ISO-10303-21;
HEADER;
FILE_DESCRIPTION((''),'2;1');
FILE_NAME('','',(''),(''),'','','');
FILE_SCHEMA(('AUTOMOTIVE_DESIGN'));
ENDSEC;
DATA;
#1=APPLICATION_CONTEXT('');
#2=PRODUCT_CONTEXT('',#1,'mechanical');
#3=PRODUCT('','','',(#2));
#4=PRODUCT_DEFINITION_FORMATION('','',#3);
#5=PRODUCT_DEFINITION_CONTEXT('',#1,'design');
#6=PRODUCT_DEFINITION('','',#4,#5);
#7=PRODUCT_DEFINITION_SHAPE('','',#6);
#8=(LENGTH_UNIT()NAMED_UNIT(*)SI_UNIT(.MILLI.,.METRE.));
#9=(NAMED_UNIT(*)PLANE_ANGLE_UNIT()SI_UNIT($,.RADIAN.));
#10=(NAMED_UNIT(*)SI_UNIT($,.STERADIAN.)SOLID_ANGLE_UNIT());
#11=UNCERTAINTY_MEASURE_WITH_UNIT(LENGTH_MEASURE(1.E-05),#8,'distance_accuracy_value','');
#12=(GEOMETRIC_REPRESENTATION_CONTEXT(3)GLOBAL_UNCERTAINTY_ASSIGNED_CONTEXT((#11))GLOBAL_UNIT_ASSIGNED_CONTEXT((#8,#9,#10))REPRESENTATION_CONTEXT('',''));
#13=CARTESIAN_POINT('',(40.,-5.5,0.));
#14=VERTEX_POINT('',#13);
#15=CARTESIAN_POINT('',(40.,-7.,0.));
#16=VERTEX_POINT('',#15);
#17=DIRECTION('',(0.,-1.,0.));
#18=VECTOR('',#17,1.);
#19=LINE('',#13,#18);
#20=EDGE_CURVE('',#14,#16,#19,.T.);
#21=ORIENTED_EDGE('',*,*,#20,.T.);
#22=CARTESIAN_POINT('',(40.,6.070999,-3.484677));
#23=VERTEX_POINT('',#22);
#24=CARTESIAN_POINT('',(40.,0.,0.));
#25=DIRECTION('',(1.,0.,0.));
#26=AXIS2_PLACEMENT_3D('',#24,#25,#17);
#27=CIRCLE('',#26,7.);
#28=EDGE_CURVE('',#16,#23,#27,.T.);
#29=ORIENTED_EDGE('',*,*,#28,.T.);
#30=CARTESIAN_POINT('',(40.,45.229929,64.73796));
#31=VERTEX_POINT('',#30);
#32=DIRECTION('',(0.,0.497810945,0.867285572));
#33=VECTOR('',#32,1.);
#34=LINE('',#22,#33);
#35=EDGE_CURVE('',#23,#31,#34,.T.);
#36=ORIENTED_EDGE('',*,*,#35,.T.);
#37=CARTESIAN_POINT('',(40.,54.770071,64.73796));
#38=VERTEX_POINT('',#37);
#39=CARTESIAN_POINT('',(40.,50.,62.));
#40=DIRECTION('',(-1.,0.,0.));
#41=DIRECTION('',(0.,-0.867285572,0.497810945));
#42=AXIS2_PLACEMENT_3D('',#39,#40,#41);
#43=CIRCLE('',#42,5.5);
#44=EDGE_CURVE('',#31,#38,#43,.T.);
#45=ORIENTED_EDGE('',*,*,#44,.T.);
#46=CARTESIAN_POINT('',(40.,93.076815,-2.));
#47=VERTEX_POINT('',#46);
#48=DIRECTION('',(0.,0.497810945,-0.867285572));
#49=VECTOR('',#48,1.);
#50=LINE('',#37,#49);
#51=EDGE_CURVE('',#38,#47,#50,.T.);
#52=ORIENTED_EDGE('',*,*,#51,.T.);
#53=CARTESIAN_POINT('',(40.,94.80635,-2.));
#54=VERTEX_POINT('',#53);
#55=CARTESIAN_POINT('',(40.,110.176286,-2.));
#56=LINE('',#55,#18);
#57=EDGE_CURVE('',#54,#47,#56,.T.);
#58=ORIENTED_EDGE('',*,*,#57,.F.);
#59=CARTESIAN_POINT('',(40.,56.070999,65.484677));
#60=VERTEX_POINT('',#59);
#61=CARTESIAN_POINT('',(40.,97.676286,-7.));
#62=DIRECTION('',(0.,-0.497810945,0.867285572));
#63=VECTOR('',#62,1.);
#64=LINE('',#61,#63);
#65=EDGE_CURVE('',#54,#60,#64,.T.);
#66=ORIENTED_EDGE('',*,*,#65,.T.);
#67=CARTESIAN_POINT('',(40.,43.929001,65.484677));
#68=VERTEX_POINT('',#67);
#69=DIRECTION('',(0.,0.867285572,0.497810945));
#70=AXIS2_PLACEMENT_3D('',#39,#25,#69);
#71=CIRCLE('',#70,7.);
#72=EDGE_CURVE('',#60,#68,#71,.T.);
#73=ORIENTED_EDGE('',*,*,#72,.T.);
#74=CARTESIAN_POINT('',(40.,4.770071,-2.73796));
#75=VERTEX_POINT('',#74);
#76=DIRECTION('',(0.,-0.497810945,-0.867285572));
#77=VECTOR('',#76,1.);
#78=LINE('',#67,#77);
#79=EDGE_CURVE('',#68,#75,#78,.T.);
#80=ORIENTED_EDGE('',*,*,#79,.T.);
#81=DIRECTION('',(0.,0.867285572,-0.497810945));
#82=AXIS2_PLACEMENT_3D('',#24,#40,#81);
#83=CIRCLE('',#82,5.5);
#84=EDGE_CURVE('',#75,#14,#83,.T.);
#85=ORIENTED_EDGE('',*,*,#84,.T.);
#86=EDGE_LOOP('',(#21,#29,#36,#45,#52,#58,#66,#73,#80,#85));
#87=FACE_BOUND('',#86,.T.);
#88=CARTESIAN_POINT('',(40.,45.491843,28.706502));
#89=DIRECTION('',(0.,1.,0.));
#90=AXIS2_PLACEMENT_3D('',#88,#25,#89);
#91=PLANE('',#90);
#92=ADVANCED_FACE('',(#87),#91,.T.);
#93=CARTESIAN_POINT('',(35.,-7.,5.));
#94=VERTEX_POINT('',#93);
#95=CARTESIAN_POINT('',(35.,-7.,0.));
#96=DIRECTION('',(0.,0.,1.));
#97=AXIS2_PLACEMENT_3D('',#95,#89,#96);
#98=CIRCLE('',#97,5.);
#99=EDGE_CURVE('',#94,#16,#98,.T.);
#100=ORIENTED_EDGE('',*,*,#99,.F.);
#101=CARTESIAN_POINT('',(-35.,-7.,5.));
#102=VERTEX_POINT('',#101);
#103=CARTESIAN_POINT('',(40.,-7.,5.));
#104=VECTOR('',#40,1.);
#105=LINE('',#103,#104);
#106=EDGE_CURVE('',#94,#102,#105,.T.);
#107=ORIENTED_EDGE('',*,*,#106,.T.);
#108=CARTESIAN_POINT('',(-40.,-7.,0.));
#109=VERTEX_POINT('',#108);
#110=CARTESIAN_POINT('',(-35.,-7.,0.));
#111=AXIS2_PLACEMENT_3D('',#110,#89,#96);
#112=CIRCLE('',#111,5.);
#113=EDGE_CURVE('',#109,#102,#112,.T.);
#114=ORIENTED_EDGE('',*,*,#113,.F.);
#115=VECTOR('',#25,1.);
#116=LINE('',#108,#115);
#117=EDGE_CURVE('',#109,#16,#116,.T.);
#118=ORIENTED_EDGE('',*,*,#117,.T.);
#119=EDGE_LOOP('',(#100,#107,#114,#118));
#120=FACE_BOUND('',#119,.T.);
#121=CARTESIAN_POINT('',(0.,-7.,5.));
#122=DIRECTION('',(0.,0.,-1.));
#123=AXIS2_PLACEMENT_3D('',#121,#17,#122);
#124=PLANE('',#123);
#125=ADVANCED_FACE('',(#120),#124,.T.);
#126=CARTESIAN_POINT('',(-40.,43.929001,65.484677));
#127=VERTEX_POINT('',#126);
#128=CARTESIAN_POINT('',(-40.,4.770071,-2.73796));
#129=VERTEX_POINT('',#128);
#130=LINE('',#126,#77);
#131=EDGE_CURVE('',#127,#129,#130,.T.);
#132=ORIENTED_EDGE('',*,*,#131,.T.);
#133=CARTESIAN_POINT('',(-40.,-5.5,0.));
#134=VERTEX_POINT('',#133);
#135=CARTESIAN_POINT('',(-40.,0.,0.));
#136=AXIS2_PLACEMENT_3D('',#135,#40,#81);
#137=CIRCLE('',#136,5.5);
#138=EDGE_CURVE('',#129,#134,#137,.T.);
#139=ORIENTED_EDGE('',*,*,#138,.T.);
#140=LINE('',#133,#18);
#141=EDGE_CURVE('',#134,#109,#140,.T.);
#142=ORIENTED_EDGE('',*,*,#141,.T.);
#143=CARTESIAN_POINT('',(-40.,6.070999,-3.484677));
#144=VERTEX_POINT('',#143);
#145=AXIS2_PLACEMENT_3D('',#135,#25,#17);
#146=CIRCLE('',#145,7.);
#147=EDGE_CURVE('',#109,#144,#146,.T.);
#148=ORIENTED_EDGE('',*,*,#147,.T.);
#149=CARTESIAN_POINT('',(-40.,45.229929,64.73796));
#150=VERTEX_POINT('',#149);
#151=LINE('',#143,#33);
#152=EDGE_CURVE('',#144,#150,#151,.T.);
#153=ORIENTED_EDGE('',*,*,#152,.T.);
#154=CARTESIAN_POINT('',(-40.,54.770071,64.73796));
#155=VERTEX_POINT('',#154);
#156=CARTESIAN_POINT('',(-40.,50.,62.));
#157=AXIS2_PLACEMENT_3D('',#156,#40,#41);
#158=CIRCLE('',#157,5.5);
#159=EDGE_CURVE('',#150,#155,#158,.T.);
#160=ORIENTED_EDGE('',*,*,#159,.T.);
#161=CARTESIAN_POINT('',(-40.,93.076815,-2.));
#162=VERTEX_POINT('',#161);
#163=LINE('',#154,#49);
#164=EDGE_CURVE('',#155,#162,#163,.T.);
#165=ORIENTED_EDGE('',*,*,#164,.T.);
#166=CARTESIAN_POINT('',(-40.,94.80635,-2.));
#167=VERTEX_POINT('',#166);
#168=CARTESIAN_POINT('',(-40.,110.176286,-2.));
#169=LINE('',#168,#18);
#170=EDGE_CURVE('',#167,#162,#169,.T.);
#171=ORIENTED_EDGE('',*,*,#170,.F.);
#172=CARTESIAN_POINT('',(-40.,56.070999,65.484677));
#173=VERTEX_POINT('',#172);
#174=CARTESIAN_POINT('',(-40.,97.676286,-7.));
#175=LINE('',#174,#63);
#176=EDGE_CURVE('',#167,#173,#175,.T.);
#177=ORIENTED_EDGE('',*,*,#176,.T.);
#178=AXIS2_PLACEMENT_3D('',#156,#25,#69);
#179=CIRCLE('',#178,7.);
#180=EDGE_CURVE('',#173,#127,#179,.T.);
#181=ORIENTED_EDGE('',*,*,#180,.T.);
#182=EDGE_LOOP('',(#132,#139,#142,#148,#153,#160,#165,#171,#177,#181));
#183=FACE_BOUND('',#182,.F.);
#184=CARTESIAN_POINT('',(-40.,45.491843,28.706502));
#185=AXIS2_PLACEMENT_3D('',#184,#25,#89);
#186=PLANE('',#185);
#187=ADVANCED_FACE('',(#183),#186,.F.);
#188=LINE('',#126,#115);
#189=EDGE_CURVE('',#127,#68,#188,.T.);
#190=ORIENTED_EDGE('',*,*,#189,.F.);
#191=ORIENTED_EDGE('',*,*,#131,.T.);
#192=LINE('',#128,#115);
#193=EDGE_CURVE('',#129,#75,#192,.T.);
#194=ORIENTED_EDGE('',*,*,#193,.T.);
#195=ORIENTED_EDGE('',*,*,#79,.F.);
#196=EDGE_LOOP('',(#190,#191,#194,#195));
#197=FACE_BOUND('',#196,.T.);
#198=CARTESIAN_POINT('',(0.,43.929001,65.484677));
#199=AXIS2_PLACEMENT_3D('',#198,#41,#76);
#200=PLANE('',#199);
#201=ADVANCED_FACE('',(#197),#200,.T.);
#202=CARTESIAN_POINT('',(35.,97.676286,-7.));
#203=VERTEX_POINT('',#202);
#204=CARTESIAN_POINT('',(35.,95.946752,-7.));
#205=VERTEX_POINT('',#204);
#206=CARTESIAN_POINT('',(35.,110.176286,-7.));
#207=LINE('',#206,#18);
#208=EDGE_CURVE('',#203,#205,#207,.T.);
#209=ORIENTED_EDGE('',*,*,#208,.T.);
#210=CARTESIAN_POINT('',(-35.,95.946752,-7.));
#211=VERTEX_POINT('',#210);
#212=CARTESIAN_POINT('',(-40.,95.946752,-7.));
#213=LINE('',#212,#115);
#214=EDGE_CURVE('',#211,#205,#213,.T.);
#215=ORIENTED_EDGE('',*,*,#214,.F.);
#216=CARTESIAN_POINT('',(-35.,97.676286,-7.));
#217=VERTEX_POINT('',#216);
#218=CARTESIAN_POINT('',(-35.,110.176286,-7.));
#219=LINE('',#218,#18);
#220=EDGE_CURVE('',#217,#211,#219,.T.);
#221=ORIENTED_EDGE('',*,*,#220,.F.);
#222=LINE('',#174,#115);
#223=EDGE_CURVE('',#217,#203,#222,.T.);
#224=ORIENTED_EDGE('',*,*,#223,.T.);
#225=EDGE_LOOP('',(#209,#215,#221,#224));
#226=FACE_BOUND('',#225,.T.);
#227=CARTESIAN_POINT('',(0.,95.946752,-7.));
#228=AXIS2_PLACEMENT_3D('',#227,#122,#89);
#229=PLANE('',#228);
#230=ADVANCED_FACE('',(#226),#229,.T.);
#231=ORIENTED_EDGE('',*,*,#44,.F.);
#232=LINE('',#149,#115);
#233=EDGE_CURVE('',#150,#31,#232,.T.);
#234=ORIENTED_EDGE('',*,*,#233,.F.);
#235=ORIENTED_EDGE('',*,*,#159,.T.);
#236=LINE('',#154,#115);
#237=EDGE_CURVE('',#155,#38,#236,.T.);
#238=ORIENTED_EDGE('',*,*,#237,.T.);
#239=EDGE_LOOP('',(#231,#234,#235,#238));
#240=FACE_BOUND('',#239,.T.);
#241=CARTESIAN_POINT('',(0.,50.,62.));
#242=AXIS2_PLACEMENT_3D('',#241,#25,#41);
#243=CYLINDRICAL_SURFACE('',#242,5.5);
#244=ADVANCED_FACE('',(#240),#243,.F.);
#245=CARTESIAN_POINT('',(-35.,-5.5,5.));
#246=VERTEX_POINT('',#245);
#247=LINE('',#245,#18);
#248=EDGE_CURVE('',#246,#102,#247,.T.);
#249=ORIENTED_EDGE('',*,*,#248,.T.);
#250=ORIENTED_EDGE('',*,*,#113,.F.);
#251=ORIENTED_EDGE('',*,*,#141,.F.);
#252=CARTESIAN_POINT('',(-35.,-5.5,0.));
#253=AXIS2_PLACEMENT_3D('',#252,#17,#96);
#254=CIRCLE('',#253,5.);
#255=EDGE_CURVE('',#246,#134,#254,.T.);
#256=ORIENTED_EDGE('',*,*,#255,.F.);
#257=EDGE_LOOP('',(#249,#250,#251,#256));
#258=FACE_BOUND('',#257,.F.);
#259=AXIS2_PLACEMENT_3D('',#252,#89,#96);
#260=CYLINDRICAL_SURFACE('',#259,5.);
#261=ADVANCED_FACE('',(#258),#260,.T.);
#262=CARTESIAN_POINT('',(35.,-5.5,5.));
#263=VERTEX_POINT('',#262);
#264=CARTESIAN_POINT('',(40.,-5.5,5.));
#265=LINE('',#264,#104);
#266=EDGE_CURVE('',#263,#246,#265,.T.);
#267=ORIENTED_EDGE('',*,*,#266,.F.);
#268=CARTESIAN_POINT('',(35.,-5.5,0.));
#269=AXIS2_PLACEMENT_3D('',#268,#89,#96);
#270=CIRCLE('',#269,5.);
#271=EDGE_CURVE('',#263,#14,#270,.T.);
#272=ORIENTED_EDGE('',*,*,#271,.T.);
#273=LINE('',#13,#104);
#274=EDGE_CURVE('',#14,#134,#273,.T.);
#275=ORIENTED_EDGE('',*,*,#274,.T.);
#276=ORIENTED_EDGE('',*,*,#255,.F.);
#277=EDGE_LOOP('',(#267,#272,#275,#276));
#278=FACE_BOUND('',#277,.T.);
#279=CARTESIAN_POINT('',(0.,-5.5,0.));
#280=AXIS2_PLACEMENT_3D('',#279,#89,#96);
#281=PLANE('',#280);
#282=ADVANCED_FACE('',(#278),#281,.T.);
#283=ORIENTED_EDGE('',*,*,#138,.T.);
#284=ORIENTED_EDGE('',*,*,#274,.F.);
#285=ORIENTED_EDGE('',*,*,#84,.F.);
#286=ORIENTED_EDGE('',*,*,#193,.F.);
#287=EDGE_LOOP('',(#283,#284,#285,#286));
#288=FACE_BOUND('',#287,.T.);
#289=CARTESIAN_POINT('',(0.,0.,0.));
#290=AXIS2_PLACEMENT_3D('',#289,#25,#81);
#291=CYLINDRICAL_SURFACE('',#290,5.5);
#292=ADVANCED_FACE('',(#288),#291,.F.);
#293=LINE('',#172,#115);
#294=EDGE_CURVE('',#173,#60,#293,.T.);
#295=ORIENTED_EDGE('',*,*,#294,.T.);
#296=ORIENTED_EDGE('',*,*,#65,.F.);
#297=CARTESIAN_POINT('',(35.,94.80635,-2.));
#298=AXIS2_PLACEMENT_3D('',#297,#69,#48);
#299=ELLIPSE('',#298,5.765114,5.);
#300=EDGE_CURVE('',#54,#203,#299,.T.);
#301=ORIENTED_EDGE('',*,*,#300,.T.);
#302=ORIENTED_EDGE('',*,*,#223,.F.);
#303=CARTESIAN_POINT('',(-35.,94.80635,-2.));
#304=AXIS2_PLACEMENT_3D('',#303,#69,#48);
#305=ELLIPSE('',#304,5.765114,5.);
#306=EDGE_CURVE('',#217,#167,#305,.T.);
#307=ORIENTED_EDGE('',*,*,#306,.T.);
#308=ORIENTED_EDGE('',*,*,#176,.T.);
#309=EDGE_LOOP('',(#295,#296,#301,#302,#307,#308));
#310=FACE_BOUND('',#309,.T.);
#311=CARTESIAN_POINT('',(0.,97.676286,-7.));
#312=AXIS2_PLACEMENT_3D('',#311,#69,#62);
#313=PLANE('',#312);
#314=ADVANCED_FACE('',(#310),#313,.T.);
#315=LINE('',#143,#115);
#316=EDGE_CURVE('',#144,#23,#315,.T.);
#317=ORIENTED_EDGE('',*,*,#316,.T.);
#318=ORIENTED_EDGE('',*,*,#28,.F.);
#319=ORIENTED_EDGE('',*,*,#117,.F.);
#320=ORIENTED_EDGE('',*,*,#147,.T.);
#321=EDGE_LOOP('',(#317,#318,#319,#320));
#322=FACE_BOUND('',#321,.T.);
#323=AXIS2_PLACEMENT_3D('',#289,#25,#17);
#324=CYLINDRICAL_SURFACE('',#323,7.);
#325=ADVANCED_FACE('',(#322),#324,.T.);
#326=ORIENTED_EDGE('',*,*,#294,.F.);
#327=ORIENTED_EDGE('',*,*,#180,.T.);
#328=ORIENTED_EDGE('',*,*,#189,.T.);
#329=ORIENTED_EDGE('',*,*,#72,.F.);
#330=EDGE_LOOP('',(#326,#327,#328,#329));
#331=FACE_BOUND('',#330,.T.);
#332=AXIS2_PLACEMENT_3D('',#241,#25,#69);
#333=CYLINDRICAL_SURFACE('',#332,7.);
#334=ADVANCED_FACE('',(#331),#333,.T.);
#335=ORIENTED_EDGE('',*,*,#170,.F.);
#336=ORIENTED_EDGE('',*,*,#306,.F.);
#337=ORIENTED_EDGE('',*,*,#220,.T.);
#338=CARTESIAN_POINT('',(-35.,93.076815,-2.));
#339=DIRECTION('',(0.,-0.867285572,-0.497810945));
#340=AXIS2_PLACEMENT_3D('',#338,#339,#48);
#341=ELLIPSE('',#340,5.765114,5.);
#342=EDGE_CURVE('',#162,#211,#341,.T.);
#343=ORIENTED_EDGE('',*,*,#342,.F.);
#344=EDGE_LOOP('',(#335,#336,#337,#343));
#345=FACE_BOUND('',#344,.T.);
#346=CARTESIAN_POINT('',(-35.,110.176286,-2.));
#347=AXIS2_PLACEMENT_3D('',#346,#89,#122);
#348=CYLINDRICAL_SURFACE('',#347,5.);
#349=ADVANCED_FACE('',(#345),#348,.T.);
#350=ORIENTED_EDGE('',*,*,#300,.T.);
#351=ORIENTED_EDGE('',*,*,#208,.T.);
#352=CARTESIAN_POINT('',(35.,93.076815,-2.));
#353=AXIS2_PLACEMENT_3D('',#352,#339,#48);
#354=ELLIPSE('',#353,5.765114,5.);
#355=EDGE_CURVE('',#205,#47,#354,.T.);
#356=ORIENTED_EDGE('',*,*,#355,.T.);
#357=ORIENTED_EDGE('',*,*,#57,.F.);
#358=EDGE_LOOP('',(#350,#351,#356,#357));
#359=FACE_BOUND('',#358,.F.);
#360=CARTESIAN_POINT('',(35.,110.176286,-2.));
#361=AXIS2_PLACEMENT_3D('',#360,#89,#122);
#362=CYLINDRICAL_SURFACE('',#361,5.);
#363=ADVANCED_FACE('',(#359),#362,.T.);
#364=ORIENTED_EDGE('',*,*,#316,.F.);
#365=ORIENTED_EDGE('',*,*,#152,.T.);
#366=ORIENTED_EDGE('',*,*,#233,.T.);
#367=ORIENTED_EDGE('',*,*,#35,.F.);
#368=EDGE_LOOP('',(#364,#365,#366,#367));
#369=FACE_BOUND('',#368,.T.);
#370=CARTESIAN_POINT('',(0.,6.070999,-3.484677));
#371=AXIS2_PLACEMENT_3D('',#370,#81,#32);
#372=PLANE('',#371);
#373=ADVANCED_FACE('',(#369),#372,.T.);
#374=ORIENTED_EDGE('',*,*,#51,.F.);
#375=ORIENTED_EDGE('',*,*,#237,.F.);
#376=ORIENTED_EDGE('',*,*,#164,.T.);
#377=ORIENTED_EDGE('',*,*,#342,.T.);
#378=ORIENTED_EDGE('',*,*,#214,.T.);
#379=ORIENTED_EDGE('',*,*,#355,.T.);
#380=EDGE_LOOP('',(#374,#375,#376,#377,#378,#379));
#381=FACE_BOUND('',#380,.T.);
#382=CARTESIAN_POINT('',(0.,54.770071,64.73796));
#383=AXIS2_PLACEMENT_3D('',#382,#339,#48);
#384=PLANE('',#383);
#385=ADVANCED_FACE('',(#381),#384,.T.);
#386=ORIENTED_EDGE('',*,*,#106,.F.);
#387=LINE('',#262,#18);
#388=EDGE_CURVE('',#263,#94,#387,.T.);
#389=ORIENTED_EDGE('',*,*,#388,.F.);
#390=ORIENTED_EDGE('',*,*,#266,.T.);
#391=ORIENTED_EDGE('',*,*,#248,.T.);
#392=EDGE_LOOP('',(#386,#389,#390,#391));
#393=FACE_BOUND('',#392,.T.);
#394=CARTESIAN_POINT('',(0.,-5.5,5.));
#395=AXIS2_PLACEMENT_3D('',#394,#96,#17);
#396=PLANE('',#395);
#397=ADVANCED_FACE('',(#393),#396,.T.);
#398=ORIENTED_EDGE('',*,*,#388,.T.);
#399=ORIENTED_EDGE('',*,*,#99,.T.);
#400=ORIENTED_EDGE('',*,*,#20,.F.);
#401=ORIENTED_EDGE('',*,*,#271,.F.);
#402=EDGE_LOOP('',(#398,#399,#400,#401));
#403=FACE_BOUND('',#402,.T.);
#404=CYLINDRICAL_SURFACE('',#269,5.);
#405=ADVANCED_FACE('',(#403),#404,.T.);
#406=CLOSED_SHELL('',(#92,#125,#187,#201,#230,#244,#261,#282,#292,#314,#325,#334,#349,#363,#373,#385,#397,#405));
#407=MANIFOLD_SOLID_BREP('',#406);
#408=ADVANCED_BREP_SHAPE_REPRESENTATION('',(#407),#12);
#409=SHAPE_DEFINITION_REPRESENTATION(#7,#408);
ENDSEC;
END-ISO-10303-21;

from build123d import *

# Parameters (mm, degrees)
F1_DEPTH    = 40
F2_T1_DEPTH = 14
F2_T3_DEPTH = 26.7295341336


# Not quite as in the source:
# - a fillet or chamfer that OpenCascade refuses, or shapes differently, is made with other operations: its cross-section is extruded or revolved along the edge and cut away or added


with BuildPart() as f1:
    # F0 (on Right) → F1 (new body, symmetric)
    with BuildSketch(Plane.YZ):
        with BuildLine():
            Line((-7, 5), (-7, 0))
            ThreePointArc((-7, 0), (-1.8031925829, -6.7637634871), (6.0709990026, -3.484676615))
            Line((6.0709990026, -3.484676615), (45.2299293551, 64.7379601975))
            ThreePointArc((45.2299293551, 64.7379601975), (50, 67.5), (54.7700706449, 64.7379601975))
            Line((54.7700706449, 64.7379601975), (95.9467521433, -7))
            Line((95.9467521433, -7), (97.6762862769, -7))
            Line((97.6762862769, -7), (56.0709990026, 65.484676615))
            ThreePointArc((56.0709990026, 65.484676615), (50, 69), (43.9290009974, 65.484676615))
            Line((43.9290009974, 65.484676615), (4.7700706449, -2.7379601975))
            ThreePointArc((4.7700706449, -2.7379601975), (-1.4167941723, -5.314385597), (-5.5, 0))
            Line((-5.5, 0), (-5.5, 5))
            Line((-5.5, 5), (-7, 5))
        make_face()
    extrude(amount=F1_DEPTH, both=True)

    # F2: fillet of radius 5 on 4 edges, made by hand

    # F2_s2 → F2_t1 (cut)
    with BuildSketch(Plane.XZ.offset(5.5)):
        with BuildLine():
            ThreePointArc((35, 5), (38.5355339059, 3.5355339059), (40, 0))
            Line((40, 0), (40, 5))
            Line((40, 5), (35, 5))
        make_face()
        with BuildLine():
            ThreePointArc((-35, 5), (-38.5355339059, 3.5355339059), (-40, 0))
            Line((-40, 0), (-40, 5))
            Line((-40, 5), (-35, 5))
        make_face()
    extrude(amount=F2_T1_DEPTH, mode=Mode.SUBTRACT)

    # F2_s4 → F2_t3 (cut)
    with BuildSketch(Plane.XZ.offset(-110.1762862769)):
        with BuildLine():
            ThreePointArc((35, -7), (38.5355339059, -5.5355339059), (40, -2))
            Line((40, -2), (40, -7))
            Line((40, -7), (35, -7))
        make_face()
        with BuildLine():
            ThreePointArc((-35, -7), (-38.5355339059, -5.5355339059), (-40, -2))
            Line((-40, -2), (-40, -7))
            Line((-40, -7), (-35, -7))
        make_face()
    extrude(amount=F2_T3_DEPTH, mode=Mode.SUBTRACT)


solid = f1.part
